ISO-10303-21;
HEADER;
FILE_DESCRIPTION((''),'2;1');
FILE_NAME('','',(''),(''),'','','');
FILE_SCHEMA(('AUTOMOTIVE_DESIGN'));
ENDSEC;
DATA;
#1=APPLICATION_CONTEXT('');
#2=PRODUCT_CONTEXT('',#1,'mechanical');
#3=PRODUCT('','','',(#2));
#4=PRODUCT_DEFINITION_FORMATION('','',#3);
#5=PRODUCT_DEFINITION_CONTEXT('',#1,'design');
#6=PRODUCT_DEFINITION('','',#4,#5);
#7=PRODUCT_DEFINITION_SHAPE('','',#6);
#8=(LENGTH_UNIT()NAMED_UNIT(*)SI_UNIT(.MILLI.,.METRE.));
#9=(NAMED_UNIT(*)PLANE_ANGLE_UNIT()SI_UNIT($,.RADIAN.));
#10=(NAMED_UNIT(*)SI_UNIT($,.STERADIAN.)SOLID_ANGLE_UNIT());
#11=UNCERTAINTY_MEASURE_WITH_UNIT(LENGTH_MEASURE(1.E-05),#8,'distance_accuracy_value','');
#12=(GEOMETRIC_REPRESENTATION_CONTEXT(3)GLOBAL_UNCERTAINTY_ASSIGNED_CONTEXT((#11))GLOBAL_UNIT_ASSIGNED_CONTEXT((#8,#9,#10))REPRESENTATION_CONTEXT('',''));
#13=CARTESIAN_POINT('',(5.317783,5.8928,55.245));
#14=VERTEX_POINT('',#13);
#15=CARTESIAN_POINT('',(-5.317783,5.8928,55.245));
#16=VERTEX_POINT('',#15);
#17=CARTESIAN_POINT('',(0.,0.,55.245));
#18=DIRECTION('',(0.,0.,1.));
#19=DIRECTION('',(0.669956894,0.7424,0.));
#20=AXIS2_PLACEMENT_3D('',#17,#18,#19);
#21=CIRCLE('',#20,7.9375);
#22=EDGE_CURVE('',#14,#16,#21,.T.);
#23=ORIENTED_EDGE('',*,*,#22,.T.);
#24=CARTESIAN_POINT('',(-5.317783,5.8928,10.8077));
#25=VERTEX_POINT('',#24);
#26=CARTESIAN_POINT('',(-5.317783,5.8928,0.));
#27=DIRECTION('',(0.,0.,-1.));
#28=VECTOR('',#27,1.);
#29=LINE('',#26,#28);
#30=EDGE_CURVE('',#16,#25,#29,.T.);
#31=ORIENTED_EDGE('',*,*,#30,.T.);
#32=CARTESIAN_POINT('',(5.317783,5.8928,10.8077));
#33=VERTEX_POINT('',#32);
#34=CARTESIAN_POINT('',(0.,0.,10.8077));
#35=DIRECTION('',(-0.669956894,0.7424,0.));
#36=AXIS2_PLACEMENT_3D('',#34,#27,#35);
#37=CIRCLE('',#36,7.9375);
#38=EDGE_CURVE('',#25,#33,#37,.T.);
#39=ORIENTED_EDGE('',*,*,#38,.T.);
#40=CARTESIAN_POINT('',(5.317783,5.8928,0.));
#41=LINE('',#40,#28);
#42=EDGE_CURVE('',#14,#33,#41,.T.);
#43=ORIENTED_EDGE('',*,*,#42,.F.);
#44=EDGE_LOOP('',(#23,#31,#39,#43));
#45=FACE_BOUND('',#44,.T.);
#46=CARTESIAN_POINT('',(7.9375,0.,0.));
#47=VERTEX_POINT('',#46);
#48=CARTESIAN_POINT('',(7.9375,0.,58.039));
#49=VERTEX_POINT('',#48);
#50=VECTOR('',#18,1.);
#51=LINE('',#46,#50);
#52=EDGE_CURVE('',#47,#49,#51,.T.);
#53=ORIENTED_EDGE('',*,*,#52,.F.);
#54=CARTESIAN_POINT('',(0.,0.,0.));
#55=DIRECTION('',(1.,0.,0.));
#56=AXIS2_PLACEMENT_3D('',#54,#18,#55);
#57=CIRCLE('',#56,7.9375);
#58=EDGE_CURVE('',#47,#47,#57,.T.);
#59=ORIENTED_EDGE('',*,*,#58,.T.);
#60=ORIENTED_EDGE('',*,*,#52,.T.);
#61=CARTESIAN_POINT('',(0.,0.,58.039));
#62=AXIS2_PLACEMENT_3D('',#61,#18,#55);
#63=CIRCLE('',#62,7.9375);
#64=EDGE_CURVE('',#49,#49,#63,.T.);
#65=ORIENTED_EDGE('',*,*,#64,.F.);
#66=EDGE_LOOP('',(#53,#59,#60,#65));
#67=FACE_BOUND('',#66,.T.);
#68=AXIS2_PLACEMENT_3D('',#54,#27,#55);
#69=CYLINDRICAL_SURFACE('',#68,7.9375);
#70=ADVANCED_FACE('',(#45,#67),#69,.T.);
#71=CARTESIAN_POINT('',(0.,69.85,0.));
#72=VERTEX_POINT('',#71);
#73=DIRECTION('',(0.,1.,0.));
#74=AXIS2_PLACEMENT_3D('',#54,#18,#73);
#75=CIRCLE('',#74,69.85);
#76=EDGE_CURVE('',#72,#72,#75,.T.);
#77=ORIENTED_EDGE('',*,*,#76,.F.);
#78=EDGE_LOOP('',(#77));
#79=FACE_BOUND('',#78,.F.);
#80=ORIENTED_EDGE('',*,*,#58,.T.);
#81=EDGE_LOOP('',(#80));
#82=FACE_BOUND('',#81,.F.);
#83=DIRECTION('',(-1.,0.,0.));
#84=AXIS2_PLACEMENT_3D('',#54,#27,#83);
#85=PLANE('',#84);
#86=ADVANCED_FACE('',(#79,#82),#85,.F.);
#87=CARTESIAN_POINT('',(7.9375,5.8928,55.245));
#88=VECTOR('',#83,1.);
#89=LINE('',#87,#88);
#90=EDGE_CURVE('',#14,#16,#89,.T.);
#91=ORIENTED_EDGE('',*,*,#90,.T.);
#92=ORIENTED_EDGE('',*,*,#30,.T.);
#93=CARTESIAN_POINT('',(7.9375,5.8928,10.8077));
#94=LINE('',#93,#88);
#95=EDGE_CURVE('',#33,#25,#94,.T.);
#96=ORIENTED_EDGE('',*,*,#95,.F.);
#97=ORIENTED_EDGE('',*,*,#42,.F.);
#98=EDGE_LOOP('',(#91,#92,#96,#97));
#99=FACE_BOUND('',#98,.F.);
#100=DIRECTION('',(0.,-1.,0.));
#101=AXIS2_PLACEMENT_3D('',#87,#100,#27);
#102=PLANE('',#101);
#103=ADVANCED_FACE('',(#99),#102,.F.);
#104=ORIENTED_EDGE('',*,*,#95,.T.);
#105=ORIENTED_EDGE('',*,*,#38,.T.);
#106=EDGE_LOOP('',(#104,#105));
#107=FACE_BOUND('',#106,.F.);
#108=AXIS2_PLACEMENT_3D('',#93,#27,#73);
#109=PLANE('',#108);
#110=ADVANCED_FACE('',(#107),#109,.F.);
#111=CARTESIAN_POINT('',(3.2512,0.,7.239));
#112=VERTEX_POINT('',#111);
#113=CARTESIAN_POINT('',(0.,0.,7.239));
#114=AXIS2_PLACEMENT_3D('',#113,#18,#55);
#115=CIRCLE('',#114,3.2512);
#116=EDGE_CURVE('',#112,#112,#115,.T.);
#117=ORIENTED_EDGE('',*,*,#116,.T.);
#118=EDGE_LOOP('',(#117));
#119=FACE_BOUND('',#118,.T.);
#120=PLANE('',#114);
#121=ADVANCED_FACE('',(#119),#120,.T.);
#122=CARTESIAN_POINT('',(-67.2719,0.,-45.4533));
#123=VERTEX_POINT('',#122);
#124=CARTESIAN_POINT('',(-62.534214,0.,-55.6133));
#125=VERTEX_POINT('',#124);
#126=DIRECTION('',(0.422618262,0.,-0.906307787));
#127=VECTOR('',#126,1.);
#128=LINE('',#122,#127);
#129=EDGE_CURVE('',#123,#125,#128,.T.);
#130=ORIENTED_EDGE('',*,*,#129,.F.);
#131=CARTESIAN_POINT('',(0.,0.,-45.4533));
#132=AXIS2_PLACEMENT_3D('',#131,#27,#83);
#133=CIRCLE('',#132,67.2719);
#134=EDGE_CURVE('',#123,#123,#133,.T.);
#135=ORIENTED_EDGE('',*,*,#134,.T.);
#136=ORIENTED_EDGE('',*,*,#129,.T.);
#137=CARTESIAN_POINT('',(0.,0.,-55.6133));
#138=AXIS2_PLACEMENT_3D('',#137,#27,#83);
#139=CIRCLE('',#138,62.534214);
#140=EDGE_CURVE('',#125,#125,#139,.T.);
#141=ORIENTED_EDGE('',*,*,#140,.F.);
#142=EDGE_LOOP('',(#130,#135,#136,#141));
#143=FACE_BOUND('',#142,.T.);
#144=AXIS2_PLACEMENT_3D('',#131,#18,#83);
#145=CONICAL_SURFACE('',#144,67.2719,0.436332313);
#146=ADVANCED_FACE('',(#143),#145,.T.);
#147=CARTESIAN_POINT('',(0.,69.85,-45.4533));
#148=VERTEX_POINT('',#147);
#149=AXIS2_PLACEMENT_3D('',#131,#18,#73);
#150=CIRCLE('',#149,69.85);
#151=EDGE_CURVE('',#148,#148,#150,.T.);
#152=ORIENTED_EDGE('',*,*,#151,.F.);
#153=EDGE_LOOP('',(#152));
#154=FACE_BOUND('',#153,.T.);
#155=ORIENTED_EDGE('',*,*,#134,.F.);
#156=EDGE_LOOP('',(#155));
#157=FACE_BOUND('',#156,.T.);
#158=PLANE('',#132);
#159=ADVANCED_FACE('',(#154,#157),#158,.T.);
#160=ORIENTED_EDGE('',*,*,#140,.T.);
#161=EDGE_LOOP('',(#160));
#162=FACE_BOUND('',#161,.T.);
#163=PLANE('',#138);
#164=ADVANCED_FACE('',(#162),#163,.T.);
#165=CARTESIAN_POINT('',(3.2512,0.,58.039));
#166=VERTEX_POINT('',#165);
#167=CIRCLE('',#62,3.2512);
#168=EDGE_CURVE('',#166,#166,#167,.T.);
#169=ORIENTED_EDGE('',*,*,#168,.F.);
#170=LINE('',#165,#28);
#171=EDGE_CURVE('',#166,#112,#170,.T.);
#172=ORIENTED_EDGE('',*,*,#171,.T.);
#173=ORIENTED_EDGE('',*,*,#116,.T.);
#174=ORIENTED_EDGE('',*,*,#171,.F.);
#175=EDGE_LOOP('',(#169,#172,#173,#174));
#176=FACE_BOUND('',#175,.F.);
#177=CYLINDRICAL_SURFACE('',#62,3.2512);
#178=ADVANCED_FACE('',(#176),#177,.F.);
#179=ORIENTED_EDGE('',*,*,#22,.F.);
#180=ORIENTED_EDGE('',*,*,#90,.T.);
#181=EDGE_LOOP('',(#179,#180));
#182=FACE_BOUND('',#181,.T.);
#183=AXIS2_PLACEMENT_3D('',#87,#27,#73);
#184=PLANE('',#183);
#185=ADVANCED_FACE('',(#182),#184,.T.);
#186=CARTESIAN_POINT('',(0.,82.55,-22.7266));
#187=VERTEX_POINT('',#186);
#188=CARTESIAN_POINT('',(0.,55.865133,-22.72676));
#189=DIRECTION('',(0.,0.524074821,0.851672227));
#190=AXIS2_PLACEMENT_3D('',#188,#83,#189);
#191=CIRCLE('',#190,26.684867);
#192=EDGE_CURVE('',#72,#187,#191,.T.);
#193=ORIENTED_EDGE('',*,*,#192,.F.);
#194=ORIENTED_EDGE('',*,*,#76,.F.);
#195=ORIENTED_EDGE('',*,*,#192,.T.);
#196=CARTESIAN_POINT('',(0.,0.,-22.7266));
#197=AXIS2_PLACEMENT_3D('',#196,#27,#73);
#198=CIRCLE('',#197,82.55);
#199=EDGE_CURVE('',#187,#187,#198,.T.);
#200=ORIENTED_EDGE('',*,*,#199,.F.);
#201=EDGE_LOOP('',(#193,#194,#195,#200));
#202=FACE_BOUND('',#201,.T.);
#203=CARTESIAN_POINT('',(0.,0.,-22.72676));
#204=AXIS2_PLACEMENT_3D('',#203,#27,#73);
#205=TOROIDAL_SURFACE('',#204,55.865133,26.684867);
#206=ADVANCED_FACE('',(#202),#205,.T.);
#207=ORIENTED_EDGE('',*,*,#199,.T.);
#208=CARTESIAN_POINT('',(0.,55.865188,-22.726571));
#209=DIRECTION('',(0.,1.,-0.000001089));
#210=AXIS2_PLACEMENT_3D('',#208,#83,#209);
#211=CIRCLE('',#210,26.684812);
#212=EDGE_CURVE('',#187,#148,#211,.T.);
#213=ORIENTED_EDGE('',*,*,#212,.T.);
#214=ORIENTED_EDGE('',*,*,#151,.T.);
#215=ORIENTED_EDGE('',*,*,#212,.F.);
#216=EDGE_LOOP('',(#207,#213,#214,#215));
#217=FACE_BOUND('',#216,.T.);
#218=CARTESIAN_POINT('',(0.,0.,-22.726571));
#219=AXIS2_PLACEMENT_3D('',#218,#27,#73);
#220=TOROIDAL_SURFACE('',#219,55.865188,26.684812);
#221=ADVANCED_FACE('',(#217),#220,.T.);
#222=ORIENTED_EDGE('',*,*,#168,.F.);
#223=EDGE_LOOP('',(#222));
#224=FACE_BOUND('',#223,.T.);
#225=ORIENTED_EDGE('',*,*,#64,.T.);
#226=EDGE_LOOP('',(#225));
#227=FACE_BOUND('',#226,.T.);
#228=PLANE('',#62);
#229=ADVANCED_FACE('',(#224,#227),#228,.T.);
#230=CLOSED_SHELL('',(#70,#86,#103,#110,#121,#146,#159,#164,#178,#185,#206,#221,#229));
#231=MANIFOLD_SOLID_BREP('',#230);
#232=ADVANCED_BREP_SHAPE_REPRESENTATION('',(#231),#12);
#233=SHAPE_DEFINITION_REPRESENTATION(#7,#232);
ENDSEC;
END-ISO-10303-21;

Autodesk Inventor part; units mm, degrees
ref_plane "XZ Plane" through (0, 0, 0) normal (0, 1, 0) x (-1, 0, 0)
ref_plane "XY Plane" through (0, 0, 0) normal (0, 0, 1) x (1, 0, 0)
sketch "Sketch1" plane through (0, 0, 0) normal (0, 0, 1) x (1, 0, 0)
  circle A0 centre (0, 0) radius 7.9375
  dimension "d0" = 15.875
extrude "Extrusion1" add sketch "Sketch1" along normal blind 58.039
sketch "Sketch2" plane through (0, 0, 0) normal (0, 0, -1) x (-1, 0, 0)
  circle A0 centre (0, 0) radius 82.55
  dimension "d3" = 165.1
extrude "Extrusion2" add sketch "Sketch2" along normal blind 45.4533
sketch "Sketch3" plane through (0, 0, -45.4533) normal (0, 0, -1) x (-1, 0, 0)
  circle A0 centre (0, 0) radius 67.2719
  circle A1 centre (0, 0) radius 53.975
  dimension "d6" = 134.5438
  dimension "d20" = 107.95
ref_plane "Work Plane3" through (0, 0, -45.4533) normal (0, 0, -1) x (-1, 0, 0)
sketch "Sketch4" plane through (0, 0, -45.4533) normal (0, 0, -1) x (-1, 0, 0)
  point P0 (0, 0)
ref_plane "Work Plane1" through (7.9375, 0, 0) normal (1, 0, 0) x (0, 1, 0)
sketch "Sketch5" plane through (7.9375, 0, 0) normal (1, 0, 0) x (0, 1, 0)
  line L0 (-7.9375, 0) -> (-7.9375, 58.039) projected
  line L1 (7.9375, 58.039) -> (-7.9375, 58.039) projected
  line L2 (7.9375, 58.039) -> (-7.9375, 58.039) projected
  line L3 (7.9375, 0) -> (-7.9375, 0) projected
  line L4 (7.9375, 0) -> (7.9375, 58.039) projected
  line L5 (5.8928, 55.245) -> (5.8928, 10.8077)
  line L6 (5.8928, 55.245) -> (7.9375, 55.245)
  line L7 (5.8928, 10.8077) -> (7.9375, 10.8077)
  point P0 (0, 0)
  dimension "d9" = 13.8303
  dimension "d10" = 2.794
  dimension "d11" = 10.8077
extrude "Extrusion4" cut sketch "Sketch5" against normal blind 50.8 contours L7 L5 L6 L4
sketch "Sketch6" plane through (0, 0, 58.039) normal (0, 0, 1) x (1, 0, 0)
  circle A0 centre (0, 0) radius 3.2512
  dimension "d14" = 6.5024
ref_plane "Work Plane2" through (0, 0, -49.2633) normal (-1, 0, 0) x (0, 0, 1)
extrude "Extrusion6" add sketch "Sketch3" along normal blind 10.16 draft -25
extrude "Extrusion7" add sketch "Sketch3" along normal blind 10.16 draft 25 contours A1
sketch "Sketch8" plane through (0, 0, -49.2633) normal (-1, 0, 0) x (0, 0, 1)
  line L0 (49.2633, 82.55) -> (3.81, 82.55) projected
  line L1 (26.5367, 82.55) -> (26.5367, 46.429)
  arc A0 (49.2633, 69.85) -> (26.5367, 82.55) centre (26.5367, 55.8653) ccw
  line L2 (49.2633, 82.55) -> (49.2633, -82.55) projected
  arc A1 (26.5367, 82.55) -> (3.81, 69.85) centre (26.5367, 55.8653) ccw
  line L3 (49.2633, 82.55) -> (3.81, 82.55) projected
  line L4 (3.81, 82.55) -> (3.81, -82.55) projected
  line L5 (-29.0805, 0) -> (130.0328, 0) projected
  point P0 (49.2633, 0)
  dimension "d25" = 0
  dimension "d26" = 12.7
revolve "Revolution2" cut sketch "Sketch8" angle 360 about axis through (0, 0, -49.2633) along (0, 0, 1) contours L2 A0 L0 | A1 L4 L0
extrude "Extrusion8" cut sketch "Sketch6" against normal blind 50.8
properties part number "Wheel"
